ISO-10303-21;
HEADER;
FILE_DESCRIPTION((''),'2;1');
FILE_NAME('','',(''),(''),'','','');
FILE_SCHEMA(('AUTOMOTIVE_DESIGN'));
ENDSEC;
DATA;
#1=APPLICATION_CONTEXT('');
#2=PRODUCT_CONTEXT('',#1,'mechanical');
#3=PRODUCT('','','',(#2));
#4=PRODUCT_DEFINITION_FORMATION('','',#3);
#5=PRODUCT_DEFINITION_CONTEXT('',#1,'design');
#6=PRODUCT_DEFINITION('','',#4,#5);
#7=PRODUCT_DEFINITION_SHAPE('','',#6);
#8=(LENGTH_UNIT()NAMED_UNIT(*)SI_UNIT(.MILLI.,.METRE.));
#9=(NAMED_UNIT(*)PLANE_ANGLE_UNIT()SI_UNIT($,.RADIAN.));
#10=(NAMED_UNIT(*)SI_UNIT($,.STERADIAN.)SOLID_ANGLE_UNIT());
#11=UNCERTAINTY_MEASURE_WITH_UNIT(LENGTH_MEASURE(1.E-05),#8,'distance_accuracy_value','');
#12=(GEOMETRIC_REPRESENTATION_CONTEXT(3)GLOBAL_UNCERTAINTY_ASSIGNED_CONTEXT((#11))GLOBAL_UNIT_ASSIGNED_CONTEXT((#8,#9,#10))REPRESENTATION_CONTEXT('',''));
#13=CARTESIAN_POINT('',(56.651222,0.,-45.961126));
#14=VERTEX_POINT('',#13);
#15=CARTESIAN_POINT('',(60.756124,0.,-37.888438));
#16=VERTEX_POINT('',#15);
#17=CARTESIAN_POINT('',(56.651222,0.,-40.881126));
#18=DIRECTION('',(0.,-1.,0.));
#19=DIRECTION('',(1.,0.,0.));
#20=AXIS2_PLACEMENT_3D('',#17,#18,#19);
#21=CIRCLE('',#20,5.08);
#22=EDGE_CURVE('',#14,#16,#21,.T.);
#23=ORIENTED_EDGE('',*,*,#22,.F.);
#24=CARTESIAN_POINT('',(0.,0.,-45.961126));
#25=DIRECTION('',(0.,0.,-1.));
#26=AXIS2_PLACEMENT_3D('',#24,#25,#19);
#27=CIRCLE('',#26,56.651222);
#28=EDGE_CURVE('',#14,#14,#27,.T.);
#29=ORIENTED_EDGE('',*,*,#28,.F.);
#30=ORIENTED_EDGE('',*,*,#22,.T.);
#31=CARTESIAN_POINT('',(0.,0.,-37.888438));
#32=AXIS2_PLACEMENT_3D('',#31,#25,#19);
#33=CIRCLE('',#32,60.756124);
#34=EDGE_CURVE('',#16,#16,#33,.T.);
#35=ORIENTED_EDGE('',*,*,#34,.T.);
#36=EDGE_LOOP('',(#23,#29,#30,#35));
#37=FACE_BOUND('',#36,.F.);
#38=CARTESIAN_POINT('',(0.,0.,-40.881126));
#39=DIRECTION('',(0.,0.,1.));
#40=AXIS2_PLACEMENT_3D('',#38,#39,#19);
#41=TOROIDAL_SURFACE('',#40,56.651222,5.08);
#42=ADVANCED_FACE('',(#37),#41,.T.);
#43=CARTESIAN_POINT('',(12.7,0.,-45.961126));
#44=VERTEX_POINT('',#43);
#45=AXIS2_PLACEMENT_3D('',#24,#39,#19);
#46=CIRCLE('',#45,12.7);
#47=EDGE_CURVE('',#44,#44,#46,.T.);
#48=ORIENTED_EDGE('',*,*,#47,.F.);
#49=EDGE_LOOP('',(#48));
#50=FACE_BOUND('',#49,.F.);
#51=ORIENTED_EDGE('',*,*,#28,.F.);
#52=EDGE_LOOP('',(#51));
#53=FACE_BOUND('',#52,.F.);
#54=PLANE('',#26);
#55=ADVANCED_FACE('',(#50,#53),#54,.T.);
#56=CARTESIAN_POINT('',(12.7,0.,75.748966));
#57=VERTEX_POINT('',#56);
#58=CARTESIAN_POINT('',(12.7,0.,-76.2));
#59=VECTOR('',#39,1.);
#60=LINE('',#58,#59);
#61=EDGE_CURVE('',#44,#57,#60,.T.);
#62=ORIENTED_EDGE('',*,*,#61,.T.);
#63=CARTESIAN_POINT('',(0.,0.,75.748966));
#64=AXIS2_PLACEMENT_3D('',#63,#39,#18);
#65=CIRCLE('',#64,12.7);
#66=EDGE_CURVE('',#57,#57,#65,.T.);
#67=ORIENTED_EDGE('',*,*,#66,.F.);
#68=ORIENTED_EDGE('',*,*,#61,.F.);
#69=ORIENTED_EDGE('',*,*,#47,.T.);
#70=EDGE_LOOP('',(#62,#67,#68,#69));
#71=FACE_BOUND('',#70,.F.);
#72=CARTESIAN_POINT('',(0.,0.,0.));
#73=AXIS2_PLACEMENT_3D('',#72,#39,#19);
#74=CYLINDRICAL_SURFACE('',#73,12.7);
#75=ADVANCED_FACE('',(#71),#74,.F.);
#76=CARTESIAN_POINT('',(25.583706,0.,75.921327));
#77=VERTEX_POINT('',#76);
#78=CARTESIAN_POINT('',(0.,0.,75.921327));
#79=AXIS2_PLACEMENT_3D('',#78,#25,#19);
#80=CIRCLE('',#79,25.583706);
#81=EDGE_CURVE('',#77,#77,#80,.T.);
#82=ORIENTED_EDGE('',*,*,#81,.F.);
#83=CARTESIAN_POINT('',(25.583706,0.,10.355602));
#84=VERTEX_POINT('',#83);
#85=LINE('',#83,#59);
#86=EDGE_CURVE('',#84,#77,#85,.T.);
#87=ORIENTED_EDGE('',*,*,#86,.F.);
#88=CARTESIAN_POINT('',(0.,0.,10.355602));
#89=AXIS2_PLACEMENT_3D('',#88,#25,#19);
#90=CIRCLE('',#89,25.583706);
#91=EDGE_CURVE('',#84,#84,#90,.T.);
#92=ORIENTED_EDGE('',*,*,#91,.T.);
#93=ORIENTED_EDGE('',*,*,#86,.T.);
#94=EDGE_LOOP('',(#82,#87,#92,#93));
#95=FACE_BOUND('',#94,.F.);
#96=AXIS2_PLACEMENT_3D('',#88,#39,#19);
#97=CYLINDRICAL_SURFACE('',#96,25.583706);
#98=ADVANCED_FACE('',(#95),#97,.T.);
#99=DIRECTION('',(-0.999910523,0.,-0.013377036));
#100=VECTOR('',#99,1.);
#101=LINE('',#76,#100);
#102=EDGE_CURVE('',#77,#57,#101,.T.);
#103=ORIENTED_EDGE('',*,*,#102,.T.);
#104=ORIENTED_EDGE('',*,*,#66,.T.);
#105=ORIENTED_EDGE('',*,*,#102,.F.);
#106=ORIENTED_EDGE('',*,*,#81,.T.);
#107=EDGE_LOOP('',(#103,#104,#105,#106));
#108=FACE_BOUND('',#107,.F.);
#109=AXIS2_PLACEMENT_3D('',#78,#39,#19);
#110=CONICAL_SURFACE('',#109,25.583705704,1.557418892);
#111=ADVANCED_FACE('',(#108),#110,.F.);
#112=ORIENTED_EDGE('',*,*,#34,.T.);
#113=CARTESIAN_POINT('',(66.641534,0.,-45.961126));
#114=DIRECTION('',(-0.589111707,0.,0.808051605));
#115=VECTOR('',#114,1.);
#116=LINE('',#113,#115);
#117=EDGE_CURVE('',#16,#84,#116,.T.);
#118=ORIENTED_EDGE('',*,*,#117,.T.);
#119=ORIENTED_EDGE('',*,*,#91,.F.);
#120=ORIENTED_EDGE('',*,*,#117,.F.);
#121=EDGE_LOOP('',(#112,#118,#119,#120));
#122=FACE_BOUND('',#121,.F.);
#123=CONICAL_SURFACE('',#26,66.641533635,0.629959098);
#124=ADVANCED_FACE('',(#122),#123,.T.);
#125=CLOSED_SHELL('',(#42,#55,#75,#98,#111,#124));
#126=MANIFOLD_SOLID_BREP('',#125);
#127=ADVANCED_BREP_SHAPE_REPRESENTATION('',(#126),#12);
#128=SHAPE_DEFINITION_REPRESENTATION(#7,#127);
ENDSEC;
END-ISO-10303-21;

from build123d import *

# Parameters (mm, degrees)
F2_R     = 12.7
F3_DEPTH = 76.2
F4_R     = 5.08


# Not quite as in the source:
# - a feature names something its author has since deleted; it is built from what else it names


with BuildPart() as f1:
    # F0 (on Front) → F1 (revolve)
    with BuildSketch(Plane.XZ):
        Polygon((0, -45.9611259629), (66.641533635, -45.9611259629), (25.5837057043, 10.3556019993), (25.5837057043, 75.9213268757), (0, 75.5790621042), align=None)
    revolve(axis=Axis((0, 0, 14.8089680707), (0, 0, -1)))

    # F2 (on Top) → F3 (cut, symmetric)
    with BuildSketch(Plane.XY):
        Circle(F2_R)
    extrude(amount=F3_DEPTH, both=True, mode=Mode.SUBTRACT)

    # F4
    f4_edges = [f1.edges().sort_by_distance(p)[0] for p in [
        (-66.641534, 0, -45.961126),
    ]]
    fillet(f4_edges, radius=F4_R)


solid = f1.part
